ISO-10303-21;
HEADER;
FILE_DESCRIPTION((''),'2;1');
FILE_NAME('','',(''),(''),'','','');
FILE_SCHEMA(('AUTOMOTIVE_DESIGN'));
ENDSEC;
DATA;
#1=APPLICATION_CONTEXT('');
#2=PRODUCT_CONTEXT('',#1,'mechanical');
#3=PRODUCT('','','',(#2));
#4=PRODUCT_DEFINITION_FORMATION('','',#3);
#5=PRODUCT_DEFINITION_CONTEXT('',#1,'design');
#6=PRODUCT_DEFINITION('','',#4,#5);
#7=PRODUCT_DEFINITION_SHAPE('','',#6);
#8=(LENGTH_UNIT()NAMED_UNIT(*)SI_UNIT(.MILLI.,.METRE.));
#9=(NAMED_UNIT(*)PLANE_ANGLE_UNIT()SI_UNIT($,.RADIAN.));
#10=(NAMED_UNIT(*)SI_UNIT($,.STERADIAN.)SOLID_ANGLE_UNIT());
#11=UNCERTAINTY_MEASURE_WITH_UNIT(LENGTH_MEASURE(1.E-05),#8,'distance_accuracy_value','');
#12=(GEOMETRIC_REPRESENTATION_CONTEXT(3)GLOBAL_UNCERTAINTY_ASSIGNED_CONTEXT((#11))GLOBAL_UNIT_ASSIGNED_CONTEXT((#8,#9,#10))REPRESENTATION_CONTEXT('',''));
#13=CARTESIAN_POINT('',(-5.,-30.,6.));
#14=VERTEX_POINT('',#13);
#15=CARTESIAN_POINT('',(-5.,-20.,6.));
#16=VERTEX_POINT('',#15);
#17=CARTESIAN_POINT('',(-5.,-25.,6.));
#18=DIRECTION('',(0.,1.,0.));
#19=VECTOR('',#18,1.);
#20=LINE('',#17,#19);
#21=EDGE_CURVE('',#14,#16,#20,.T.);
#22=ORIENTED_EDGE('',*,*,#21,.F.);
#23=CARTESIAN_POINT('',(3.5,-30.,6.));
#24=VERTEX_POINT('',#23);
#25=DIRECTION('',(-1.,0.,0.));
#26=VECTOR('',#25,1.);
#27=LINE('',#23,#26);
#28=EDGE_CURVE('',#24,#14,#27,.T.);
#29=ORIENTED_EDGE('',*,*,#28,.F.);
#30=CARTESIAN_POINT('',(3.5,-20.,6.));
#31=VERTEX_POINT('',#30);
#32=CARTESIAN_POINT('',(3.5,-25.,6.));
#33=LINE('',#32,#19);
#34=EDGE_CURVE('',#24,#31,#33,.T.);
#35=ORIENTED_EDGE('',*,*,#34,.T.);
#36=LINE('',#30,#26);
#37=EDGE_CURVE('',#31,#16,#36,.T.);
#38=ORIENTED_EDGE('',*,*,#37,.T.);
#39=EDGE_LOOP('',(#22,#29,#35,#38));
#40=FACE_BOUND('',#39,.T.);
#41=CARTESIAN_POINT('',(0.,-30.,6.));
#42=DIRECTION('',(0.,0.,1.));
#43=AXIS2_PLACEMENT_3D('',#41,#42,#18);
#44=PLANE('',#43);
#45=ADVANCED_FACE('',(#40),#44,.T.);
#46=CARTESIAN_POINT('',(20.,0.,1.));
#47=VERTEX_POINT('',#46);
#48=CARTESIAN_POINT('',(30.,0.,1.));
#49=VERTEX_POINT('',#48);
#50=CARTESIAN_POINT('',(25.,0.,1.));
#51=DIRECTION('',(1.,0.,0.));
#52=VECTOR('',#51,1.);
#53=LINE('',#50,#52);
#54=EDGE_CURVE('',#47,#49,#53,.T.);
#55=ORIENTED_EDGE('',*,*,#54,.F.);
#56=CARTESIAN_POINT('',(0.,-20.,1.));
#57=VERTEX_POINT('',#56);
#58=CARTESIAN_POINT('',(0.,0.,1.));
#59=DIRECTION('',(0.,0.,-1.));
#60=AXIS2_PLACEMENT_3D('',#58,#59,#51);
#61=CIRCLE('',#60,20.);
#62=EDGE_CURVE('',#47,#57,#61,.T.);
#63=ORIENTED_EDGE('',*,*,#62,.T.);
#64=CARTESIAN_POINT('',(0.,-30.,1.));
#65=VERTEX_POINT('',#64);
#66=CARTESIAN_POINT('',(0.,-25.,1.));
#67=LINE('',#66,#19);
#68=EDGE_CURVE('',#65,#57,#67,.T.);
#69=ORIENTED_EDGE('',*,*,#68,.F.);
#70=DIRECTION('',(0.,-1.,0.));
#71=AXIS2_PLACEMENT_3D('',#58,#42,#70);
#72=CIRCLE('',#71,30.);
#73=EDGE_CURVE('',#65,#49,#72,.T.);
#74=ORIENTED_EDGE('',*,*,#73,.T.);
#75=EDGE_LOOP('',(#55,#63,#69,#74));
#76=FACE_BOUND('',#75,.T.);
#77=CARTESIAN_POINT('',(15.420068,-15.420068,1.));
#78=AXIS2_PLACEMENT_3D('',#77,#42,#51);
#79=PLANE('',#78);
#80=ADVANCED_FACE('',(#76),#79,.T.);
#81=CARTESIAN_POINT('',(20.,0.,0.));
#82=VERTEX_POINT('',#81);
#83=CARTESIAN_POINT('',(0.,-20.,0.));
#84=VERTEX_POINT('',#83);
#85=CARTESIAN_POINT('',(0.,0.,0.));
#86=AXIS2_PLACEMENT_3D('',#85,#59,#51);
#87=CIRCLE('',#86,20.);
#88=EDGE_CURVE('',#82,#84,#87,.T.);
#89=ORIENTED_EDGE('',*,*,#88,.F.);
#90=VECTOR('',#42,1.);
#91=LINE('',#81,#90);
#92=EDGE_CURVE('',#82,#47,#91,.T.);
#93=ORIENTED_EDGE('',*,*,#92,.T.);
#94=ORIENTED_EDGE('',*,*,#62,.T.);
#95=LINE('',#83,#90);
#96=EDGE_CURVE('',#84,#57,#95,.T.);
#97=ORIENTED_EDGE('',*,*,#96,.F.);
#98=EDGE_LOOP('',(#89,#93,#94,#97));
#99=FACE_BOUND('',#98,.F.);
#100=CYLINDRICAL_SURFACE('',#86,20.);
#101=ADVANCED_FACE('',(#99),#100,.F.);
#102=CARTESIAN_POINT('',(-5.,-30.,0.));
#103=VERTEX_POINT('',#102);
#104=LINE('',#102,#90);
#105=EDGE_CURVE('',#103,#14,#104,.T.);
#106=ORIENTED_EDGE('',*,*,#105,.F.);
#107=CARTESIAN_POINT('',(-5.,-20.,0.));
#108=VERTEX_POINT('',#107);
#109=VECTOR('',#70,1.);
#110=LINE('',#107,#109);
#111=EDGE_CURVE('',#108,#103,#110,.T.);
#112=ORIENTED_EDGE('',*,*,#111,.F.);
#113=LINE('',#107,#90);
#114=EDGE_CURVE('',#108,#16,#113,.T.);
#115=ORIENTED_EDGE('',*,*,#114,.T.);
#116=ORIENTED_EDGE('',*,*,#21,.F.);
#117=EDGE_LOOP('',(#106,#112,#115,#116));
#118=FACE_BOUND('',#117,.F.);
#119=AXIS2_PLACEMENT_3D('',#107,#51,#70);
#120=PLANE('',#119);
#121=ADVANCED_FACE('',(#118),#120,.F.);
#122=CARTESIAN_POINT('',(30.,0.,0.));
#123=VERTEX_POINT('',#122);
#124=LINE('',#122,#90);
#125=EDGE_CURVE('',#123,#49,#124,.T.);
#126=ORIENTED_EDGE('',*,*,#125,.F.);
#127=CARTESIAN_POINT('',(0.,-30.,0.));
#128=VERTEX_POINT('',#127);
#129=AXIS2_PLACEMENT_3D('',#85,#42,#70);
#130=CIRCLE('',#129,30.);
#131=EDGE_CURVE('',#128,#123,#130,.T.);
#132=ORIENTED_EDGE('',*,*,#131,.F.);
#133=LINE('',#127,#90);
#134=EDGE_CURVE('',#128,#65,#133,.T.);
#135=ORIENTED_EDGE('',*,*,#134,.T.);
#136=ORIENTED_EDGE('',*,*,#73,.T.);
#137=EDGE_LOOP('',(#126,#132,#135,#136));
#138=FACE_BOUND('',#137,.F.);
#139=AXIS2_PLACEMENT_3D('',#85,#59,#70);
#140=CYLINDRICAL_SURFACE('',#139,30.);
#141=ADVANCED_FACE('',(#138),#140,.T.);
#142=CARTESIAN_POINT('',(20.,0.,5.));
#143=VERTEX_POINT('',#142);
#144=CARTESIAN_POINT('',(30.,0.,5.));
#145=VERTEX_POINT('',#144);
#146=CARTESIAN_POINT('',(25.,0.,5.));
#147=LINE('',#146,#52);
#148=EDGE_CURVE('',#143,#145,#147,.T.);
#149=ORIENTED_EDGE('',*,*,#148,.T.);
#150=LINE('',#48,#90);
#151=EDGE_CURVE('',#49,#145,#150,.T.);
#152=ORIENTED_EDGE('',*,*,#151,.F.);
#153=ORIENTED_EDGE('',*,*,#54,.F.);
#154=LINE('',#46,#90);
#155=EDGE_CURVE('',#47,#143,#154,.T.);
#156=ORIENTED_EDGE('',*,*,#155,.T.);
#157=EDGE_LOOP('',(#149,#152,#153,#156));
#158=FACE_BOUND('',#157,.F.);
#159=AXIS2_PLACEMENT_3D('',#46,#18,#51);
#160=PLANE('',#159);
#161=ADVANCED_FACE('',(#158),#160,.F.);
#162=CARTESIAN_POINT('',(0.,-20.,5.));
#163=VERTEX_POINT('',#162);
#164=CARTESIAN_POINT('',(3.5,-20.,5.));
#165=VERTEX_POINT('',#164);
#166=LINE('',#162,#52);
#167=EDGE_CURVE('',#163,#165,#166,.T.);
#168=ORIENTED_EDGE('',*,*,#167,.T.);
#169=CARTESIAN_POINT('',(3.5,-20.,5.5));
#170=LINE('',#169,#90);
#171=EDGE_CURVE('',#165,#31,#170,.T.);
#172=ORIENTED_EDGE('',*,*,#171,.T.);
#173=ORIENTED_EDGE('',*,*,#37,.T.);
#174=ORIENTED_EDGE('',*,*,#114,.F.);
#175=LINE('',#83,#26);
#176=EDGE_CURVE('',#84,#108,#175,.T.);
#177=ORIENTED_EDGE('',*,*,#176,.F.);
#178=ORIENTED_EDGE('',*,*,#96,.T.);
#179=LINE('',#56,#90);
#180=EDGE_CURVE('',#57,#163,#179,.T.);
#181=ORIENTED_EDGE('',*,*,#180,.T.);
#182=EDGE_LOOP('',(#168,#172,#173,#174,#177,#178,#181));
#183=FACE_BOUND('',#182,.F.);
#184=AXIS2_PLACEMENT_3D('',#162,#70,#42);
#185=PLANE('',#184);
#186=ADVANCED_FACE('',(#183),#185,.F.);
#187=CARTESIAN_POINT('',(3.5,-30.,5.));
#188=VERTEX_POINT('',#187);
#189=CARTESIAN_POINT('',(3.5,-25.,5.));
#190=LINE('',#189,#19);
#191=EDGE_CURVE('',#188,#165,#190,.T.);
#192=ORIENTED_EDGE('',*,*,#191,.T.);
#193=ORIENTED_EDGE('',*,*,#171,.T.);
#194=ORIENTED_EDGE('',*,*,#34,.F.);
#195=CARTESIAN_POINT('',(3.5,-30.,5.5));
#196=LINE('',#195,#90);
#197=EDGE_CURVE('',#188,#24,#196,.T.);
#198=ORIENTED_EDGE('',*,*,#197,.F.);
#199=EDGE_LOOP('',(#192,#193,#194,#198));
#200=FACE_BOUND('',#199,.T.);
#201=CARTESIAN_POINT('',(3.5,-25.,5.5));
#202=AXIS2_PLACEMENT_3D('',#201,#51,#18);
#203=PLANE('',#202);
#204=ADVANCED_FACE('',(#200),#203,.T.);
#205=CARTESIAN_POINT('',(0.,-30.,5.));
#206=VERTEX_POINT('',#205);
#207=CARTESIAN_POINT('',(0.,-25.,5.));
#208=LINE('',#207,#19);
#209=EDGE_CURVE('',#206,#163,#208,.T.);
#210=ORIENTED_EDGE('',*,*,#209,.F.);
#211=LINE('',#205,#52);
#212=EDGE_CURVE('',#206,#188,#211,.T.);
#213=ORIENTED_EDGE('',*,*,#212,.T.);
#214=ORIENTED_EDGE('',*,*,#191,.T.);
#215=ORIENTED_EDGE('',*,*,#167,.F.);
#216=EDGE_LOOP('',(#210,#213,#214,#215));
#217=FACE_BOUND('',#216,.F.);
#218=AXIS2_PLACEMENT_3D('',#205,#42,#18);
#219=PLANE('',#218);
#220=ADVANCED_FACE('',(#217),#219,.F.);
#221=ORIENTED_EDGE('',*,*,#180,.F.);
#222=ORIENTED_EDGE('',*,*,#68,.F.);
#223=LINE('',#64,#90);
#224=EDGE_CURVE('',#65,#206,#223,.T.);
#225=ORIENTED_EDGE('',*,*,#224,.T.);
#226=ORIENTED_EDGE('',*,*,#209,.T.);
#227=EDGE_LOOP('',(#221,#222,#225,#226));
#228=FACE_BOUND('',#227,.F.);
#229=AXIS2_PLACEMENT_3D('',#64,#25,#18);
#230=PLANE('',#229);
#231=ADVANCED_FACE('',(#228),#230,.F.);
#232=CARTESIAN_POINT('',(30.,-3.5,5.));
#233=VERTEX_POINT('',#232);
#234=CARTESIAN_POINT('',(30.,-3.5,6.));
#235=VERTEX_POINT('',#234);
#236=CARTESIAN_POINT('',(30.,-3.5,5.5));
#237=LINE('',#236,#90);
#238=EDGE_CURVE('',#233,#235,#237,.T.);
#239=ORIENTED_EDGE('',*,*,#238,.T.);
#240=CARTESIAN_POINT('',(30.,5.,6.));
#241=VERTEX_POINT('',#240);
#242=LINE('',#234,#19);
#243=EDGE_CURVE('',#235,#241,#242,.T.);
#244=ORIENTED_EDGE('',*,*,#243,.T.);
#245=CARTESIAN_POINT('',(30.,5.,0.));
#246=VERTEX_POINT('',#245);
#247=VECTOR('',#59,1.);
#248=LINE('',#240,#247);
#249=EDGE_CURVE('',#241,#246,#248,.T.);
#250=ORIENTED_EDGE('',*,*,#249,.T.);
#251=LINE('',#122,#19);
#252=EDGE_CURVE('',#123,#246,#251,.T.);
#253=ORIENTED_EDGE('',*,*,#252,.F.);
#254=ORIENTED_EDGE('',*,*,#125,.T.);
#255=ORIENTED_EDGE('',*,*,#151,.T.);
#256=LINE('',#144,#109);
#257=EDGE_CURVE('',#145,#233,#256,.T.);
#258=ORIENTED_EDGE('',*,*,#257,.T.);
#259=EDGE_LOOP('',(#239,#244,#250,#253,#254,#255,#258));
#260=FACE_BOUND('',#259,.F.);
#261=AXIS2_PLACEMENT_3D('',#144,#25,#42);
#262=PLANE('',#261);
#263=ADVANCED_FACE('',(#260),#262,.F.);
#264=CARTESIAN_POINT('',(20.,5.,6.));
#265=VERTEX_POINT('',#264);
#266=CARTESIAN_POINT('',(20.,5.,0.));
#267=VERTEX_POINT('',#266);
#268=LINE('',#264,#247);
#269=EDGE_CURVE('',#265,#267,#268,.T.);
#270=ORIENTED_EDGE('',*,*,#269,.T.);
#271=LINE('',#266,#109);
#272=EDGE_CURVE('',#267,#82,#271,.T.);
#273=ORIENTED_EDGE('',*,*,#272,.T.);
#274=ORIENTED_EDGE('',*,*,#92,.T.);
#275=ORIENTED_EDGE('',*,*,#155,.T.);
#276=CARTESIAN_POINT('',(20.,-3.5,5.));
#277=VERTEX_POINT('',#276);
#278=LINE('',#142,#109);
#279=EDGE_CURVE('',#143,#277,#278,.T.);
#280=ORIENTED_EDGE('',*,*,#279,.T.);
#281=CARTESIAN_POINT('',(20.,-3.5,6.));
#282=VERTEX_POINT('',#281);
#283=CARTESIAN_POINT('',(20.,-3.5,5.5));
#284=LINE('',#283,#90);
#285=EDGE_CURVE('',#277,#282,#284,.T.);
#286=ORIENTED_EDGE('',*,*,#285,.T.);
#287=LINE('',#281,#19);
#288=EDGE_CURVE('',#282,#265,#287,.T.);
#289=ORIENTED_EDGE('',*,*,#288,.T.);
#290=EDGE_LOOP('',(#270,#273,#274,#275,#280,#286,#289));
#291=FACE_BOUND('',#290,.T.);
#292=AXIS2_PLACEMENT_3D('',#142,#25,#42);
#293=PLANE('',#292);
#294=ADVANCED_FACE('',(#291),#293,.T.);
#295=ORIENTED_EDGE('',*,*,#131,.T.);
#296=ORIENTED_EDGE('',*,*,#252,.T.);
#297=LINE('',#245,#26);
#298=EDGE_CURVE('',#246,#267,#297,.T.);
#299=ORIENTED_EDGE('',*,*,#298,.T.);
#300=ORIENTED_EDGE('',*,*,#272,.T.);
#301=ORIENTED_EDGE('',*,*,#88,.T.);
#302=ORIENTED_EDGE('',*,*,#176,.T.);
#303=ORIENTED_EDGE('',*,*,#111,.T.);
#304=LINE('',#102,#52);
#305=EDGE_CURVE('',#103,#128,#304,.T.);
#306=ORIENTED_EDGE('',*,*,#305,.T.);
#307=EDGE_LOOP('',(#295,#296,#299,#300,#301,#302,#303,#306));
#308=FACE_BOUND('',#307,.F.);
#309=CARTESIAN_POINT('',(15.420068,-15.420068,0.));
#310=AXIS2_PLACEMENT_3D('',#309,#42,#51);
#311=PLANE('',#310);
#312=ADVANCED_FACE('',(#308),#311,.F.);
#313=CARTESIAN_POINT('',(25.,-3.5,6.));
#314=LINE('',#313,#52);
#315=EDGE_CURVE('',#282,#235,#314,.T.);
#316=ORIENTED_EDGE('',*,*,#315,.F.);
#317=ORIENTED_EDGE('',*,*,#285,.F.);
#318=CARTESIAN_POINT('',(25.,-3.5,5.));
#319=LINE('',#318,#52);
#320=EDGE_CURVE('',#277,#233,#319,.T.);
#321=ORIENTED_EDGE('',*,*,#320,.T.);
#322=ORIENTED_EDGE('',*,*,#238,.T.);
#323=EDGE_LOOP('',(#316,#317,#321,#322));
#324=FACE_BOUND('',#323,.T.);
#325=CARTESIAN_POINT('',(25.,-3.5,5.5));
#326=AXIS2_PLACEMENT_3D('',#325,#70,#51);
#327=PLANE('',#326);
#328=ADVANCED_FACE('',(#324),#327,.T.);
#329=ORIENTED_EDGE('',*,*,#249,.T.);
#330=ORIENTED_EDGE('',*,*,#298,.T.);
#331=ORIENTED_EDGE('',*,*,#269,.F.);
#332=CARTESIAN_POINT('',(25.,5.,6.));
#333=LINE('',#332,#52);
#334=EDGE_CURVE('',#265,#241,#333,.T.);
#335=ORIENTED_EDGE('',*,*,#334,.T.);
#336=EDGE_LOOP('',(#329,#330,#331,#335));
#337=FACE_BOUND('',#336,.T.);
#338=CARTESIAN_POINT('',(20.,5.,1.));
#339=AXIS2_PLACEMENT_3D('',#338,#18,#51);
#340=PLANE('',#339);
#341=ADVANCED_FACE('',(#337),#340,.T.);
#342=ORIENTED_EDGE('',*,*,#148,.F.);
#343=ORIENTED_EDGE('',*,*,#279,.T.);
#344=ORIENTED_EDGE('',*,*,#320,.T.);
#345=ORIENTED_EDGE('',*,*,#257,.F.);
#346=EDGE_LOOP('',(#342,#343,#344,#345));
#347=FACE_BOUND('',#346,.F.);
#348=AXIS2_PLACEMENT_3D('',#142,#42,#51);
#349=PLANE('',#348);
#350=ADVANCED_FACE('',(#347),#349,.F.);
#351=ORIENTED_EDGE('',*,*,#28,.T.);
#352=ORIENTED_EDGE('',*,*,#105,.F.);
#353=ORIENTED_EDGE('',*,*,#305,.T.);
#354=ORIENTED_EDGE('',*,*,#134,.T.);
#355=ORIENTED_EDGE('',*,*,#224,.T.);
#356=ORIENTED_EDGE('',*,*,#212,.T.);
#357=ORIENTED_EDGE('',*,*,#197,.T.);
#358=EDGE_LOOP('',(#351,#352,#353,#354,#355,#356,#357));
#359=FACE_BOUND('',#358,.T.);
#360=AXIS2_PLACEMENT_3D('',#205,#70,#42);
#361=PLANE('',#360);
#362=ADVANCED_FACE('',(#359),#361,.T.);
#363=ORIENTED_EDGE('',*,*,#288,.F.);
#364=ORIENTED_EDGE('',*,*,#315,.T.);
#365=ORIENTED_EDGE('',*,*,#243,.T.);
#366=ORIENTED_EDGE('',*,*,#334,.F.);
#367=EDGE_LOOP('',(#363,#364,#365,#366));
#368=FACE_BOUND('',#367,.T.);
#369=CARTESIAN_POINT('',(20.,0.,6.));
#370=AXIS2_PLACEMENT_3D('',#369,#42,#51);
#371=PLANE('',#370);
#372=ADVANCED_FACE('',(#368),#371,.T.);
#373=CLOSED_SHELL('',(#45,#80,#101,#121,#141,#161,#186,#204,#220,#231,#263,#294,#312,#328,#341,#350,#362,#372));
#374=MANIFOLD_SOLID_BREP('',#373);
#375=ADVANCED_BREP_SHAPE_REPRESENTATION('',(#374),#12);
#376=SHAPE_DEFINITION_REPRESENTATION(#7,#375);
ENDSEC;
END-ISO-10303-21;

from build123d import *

# Parameters (mm, degrees)
F1_DEPTH = 1
F2_W     = 10
F2_H     = 5
F2_W_2   = 5
F2_H_2   = 10
F3_DEPTH = 5
F5_W     = 10
F5_H     = 1
F6_DEPTH = 3.5
F4_W     = 10
F4_H     = 1
F7_DEPTH = 3.5


with BuildPart() as f1:
    # F0 (on Top) → F1 (new body)
    with BuildSketch(Plane.XY):
        with BuildLine():
            Line((30, 0), (20, 0))
            ThreePointArc((20, 0), (14.1421356237, -14.1421356237), (0, -20))
            Line((0, -20), (0, -25))
            Line((0, -25), (0, -30))
            ThreePointArc((0, -30), (21.2132034356, -21.2132034356), (30, 0))
        make_face()
        with BuildLine():
            Line((20, 5), (20, 0))
            Line((20, 0), (30, 0))
            ThreePointArc((30, 0), (29.8949156836, 2.5087878084), (29.5803989155, 5))
            Line((29.5803989155, 5), (20, 5))
        make_face()
        with BuildLine():
            Line((0, -25), (0, -20))
            Line((0, -20), (-5, -20))
            Line((-5, -20), (-5, -29.5803989155))
            ThreePointArc((-5, -29.5803989155), (-2.5087878084, -29.8949156836), (0, -30))
            Line((0, -30), (0, -25))
        make_face()
        with BuildLine():
            ThreePointArc((29.5803989155, 5), (29.8949156836, 2.5087878084), (30, 0))
            Line((30, 0), (30, 5))
            Line((30, 5), (29.5803989155, 5))
        make_face()
        with BuildLine():
            Line((-5, -30), (0, -30))
            ThreePointArc((0, -30), (-2.5087878084, -29.8949156836), (-5, -29.5803989155))
            Line((-5, -29.5803989155), (-5, -30))
        make_face()
    extrude(amount=F1_DEPTH)

    # F2 (on face) → F3 (join)
    with BuildSketch(Plane.XY.offset(1)):
        with Locations((25, 2.5)):
            Rectangle(F2_W, F2_H)
        with Locations((-2.5, -25)):
            Rectangle(F2_W_2, F2_H_2)
    extrude(amount=F3_DEPTH)

    # F5 (on face) → F6 (join)
    with BuildSketch(Plane.YZ):
        with Locations((-25, 5.5)):
            Rectangle(F5_W, F5_H)
    extrude(amount=F6_DEPTH)

    # F4 (on face) → F7 (join)
    with BuildSketch(Plane.XZ):
        with Locations((25, 5.5)):
            Rectangle(F4_W, F4_H)
    extrude(amount=F7_DEPTH)


solid = f1.part
